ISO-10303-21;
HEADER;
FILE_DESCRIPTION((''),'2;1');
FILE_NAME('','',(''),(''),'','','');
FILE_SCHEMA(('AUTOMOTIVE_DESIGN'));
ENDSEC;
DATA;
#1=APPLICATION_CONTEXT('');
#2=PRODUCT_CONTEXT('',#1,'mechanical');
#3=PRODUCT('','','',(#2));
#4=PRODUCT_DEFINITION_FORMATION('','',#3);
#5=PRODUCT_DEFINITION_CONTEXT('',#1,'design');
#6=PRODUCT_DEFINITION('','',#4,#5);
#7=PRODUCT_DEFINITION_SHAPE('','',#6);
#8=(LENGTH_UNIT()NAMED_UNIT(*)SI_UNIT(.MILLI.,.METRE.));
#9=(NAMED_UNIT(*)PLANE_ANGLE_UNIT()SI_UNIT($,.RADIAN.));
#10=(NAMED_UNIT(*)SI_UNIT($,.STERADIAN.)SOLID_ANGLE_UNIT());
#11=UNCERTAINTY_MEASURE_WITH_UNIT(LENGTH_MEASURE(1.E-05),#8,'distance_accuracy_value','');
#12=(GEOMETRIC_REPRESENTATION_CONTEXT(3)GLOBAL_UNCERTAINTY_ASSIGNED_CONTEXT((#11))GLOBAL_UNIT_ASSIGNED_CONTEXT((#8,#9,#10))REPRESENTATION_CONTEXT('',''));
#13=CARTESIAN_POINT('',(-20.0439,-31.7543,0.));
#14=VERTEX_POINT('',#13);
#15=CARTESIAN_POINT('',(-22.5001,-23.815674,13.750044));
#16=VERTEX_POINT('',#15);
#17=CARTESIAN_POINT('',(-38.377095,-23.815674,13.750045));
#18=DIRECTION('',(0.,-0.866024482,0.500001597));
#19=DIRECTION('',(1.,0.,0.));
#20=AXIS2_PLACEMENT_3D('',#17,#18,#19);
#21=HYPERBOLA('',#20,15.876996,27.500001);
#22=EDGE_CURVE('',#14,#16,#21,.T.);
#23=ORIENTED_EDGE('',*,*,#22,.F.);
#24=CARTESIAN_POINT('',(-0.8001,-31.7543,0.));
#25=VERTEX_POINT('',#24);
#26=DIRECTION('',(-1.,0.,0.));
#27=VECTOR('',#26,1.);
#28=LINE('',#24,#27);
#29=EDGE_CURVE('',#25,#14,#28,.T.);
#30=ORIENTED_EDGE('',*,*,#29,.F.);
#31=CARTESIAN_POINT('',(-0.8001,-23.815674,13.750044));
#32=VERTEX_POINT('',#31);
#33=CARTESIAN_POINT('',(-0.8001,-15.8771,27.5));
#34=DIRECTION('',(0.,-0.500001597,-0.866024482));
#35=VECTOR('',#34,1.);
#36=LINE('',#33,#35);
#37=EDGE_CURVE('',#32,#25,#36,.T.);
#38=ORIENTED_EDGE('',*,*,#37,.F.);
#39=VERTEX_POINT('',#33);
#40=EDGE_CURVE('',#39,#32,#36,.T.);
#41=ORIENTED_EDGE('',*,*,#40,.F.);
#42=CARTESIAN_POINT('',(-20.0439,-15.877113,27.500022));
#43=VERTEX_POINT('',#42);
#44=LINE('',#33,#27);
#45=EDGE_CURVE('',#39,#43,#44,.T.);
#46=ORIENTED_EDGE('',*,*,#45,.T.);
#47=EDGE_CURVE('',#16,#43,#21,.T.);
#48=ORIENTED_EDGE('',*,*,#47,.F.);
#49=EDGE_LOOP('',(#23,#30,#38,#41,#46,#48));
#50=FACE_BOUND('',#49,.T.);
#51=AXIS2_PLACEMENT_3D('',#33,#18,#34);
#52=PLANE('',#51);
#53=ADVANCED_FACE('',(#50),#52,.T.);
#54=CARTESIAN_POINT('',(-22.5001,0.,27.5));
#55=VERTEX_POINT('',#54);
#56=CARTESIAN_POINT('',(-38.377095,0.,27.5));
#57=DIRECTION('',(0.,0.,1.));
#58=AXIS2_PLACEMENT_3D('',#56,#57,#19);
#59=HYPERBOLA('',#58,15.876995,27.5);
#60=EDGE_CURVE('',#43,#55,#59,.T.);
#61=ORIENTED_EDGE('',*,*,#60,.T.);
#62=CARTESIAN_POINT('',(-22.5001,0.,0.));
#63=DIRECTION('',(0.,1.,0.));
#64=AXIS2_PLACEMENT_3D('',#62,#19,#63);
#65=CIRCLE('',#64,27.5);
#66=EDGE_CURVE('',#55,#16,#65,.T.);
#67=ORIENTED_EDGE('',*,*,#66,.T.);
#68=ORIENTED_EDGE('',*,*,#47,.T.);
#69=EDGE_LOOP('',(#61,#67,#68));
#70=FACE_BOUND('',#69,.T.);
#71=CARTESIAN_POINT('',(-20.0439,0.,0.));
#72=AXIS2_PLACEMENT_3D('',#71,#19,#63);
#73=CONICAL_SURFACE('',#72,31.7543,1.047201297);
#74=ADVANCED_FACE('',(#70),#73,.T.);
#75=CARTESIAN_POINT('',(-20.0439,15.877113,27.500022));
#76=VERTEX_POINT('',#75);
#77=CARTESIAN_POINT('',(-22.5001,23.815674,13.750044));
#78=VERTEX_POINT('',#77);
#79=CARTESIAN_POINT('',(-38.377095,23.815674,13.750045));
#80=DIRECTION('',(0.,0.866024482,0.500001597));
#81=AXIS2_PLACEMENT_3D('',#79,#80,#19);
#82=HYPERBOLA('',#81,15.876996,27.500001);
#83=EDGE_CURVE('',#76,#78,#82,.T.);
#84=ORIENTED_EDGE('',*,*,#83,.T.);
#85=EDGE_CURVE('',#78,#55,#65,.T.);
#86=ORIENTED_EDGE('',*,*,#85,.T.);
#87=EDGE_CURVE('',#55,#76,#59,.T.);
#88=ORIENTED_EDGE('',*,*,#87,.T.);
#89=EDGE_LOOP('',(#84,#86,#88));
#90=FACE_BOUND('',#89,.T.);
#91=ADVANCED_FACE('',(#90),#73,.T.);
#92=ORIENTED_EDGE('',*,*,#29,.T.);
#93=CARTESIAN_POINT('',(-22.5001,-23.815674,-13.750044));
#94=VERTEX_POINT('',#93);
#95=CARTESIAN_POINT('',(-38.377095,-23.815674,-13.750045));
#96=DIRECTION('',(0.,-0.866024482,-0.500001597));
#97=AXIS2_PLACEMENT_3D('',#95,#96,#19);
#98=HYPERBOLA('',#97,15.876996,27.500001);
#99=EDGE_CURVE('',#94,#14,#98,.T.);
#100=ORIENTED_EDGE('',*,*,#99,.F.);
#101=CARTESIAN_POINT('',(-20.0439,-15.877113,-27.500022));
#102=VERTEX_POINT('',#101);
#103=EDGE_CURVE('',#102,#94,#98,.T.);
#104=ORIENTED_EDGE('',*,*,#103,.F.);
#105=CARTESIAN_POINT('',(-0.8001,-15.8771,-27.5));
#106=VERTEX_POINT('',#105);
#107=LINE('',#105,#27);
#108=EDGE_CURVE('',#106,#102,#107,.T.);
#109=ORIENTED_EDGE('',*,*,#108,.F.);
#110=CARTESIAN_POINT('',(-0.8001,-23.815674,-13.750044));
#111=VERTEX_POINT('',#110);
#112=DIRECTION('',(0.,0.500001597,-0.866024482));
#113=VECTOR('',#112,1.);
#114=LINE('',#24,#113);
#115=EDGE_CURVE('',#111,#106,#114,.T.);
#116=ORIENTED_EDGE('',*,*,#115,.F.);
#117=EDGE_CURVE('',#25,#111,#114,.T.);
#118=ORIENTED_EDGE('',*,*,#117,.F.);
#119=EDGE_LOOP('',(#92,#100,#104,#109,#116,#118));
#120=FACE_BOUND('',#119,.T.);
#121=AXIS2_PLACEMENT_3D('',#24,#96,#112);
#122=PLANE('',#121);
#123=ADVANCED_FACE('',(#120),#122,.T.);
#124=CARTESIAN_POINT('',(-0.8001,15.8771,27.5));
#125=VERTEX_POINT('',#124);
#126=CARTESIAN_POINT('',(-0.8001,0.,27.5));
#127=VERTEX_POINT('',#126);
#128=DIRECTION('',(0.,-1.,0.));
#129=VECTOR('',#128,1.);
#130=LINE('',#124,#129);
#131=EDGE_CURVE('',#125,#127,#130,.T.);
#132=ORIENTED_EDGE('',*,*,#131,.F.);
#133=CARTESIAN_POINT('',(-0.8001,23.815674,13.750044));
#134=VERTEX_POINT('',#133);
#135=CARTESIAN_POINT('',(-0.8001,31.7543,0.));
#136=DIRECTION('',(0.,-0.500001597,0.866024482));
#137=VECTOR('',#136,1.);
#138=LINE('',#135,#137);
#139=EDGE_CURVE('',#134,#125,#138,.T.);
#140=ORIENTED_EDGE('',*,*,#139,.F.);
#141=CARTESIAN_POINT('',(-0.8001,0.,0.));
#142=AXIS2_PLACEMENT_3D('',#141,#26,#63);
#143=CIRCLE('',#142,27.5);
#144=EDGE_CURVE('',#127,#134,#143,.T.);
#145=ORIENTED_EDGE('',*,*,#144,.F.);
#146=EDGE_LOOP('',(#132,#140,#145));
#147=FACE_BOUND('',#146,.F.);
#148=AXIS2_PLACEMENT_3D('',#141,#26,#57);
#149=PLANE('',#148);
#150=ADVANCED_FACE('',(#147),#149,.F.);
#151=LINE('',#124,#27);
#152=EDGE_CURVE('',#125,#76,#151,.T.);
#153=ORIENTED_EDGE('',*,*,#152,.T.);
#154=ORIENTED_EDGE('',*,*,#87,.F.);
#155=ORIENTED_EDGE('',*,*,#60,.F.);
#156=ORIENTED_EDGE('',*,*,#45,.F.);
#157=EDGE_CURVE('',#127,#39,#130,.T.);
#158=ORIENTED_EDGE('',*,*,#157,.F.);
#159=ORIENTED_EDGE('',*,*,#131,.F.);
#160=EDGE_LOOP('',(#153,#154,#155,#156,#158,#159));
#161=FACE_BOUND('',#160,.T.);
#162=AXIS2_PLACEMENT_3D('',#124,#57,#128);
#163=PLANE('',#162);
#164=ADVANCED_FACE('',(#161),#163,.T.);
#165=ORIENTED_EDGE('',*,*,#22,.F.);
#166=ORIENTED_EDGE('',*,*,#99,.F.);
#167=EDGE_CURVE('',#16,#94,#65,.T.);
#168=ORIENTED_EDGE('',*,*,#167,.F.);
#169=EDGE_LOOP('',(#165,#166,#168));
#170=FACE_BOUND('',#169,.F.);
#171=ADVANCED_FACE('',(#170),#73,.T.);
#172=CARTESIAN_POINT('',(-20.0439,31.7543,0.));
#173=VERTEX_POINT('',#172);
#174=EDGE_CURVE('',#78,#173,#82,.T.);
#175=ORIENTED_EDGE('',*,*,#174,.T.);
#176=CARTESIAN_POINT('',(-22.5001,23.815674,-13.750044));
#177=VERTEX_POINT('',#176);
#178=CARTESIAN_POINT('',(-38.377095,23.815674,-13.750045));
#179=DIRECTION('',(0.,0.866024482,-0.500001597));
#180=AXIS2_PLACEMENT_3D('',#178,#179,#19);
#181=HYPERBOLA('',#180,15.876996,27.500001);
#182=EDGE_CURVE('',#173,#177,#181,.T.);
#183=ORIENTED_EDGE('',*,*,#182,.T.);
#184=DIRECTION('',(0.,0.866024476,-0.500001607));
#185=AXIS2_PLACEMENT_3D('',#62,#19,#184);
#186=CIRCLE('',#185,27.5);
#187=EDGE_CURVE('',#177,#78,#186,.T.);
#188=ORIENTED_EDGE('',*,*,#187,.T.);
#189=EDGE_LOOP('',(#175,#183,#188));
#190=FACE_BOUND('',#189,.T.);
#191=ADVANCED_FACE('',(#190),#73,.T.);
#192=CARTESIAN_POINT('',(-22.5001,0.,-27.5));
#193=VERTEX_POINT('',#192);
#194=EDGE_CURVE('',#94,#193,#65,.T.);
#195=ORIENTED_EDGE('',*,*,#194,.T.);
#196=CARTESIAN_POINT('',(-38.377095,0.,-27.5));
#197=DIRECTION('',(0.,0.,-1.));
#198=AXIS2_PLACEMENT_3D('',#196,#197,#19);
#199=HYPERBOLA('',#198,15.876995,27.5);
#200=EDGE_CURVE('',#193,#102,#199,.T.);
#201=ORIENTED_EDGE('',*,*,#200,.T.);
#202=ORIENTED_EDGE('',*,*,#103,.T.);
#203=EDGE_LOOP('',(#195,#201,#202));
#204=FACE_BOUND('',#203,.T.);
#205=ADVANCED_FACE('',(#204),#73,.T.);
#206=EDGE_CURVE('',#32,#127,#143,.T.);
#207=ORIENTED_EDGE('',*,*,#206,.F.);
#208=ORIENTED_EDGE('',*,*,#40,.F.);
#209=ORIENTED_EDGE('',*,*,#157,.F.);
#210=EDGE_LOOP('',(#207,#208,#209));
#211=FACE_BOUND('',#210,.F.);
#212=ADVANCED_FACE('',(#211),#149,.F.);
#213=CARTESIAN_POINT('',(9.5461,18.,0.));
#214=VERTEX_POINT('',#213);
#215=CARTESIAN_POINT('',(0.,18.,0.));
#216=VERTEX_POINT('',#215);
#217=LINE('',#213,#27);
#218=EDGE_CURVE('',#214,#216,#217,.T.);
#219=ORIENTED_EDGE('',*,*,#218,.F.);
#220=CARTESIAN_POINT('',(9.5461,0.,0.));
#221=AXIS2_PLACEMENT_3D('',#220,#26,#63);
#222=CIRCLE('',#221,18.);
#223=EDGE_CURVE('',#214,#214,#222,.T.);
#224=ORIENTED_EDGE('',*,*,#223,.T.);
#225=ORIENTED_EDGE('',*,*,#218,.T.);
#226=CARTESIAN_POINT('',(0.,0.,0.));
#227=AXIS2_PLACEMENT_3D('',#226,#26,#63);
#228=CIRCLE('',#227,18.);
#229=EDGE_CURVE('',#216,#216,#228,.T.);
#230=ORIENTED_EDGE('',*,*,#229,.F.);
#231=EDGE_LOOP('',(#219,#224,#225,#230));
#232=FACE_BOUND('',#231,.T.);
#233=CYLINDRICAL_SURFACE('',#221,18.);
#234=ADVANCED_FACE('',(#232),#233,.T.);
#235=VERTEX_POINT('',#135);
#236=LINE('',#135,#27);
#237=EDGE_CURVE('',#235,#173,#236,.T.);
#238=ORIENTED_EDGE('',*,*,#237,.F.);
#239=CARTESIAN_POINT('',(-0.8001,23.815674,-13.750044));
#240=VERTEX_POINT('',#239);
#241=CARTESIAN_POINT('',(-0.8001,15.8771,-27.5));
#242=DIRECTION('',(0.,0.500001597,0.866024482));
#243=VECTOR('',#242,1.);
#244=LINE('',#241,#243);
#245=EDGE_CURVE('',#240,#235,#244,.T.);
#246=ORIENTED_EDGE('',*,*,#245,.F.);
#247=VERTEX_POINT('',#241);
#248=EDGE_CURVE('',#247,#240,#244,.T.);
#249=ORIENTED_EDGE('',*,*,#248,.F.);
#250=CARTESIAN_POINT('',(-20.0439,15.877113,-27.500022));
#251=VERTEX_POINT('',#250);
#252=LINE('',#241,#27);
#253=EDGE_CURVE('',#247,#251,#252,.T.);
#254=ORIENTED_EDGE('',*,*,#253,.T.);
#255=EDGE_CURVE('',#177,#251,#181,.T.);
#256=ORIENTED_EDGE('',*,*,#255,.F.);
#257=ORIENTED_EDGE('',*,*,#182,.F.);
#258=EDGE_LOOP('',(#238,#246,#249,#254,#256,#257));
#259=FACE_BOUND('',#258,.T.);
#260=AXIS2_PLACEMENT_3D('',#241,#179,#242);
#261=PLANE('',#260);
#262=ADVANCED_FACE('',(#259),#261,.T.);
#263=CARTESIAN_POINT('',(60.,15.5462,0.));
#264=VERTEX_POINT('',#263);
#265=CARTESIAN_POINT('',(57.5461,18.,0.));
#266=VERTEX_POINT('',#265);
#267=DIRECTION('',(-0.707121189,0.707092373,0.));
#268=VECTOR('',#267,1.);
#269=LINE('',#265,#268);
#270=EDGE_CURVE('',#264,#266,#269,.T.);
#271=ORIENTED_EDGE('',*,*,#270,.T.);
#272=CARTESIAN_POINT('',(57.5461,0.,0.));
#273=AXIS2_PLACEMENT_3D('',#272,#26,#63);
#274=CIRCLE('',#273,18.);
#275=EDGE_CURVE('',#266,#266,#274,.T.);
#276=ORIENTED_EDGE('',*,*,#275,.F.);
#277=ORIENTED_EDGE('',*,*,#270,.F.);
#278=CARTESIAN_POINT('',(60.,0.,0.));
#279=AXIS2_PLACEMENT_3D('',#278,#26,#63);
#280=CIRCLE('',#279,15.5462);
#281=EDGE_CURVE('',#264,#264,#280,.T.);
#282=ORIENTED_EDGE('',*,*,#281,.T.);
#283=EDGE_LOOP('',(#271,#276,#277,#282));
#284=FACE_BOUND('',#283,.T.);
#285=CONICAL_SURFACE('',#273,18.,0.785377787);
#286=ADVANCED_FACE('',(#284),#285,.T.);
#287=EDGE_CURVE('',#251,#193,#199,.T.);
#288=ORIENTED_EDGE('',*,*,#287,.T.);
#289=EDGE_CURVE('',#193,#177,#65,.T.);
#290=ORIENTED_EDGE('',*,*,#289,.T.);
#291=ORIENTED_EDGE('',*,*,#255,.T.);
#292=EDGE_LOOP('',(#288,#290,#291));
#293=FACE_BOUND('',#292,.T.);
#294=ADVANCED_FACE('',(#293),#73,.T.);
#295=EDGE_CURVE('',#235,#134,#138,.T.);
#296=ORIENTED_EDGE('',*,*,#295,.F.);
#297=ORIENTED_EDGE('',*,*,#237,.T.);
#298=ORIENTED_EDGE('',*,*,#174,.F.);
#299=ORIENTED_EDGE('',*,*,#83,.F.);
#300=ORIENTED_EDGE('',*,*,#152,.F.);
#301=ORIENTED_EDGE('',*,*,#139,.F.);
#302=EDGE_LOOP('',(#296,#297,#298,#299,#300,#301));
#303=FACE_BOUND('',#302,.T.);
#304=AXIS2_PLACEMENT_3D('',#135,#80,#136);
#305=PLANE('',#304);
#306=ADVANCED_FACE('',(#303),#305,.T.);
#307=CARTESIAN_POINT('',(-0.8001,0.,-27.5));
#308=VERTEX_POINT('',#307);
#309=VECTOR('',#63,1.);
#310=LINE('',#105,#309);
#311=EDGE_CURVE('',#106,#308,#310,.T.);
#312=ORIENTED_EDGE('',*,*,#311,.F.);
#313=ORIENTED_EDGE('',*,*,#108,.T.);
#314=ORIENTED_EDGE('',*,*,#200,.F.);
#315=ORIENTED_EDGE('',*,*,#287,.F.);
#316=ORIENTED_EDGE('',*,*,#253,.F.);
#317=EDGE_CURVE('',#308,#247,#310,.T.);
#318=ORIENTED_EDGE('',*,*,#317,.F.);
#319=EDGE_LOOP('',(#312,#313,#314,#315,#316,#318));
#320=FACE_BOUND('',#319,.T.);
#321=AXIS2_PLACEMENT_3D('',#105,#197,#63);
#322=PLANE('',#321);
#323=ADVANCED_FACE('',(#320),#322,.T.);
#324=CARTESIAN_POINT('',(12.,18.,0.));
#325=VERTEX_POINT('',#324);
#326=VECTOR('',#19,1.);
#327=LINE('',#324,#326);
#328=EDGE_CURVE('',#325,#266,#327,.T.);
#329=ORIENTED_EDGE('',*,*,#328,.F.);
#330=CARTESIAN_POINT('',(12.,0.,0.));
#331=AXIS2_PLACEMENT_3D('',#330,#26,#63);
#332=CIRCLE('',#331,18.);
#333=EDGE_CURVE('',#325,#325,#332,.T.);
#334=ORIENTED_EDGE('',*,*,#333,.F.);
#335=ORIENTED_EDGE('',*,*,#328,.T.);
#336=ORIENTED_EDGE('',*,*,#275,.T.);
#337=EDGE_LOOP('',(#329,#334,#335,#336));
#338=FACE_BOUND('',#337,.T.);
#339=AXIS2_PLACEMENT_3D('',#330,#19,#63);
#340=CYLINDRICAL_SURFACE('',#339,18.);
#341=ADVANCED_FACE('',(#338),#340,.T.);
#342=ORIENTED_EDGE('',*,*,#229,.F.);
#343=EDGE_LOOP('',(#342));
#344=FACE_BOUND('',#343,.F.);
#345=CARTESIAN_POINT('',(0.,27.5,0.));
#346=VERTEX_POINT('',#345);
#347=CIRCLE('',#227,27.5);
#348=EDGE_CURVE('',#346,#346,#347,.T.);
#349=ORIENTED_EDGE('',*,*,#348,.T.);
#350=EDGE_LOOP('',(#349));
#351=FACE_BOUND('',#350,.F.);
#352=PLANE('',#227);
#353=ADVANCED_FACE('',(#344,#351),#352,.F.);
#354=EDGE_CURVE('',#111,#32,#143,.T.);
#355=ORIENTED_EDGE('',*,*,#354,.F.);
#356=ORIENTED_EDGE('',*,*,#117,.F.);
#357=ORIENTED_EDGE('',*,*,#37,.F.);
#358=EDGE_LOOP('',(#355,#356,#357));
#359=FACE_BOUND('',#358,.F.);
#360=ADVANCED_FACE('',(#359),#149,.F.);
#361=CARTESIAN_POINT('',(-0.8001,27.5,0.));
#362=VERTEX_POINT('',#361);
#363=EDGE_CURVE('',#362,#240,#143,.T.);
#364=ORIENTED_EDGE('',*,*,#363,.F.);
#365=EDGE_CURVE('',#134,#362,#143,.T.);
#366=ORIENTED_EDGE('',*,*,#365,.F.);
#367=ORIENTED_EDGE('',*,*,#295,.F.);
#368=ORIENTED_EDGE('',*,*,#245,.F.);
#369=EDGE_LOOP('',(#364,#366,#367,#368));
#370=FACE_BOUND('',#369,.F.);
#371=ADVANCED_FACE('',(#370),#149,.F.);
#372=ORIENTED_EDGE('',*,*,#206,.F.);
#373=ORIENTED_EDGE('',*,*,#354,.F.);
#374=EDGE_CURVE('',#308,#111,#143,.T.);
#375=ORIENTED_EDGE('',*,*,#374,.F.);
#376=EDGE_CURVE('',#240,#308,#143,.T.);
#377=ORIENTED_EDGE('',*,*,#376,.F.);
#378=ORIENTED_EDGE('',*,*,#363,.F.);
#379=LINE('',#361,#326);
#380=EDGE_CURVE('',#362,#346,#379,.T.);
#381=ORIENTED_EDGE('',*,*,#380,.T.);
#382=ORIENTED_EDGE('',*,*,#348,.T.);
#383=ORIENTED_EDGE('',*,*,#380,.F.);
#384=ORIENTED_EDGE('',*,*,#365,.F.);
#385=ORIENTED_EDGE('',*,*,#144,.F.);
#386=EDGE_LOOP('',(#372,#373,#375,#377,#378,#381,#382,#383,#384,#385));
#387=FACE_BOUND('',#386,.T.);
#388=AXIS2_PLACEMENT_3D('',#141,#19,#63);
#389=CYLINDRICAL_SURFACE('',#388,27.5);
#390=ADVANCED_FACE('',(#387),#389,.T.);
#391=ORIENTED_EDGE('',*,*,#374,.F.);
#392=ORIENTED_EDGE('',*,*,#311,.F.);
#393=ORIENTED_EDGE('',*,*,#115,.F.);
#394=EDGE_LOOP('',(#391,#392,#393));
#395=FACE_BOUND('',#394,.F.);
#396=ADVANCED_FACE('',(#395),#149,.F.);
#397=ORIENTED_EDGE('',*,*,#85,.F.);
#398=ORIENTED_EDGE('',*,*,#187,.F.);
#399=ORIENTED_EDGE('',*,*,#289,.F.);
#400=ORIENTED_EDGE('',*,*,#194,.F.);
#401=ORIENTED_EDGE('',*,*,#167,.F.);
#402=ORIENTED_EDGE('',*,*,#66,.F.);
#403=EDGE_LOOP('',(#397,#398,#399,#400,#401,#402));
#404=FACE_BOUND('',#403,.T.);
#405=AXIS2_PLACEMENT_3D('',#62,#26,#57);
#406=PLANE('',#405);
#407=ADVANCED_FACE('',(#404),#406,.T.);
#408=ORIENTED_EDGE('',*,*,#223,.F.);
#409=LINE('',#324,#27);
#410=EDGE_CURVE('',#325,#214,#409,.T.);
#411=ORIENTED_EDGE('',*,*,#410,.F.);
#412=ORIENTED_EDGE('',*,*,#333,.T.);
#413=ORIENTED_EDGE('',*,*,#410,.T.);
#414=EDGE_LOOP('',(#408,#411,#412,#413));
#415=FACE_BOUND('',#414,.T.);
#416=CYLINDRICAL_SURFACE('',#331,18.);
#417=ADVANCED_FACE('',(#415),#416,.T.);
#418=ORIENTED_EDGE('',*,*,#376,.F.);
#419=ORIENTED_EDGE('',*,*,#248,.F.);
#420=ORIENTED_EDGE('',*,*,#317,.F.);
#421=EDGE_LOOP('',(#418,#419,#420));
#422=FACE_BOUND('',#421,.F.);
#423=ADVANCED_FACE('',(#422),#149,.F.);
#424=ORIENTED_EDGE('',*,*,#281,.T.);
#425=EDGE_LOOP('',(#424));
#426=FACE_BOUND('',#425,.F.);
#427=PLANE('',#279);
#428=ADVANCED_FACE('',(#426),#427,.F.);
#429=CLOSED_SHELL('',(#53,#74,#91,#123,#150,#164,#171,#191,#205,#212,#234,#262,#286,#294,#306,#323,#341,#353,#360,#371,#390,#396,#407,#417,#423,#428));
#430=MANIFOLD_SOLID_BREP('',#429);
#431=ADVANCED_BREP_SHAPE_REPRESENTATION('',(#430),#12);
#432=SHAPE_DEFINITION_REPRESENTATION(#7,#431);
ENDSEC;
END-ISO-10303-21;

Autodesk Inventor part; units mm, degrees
ref_plane "YZ Plane" through (0, 0, 0) normal (1, 0, 0) x (0, 1, 0)
ref_plane "XZ Plane" through (0, 0, 0) normal (0, 1, 0) x (-1, 0, 0)
sketch "Szkic1" plane through (0, 0, 0) normal (0, 0, 1) x (1, 0, 0)
  line L0 (0, 27.5) -> (0, 18)
  line L1 (12, 18) -> (60, 18)
  line L2 (60, 18) -> (60, 0)
  line L3 (60, 0) -> (-0.8001, 0)
  line L4 (-12.9601, 0) -> (72.16, 0) projected
  line L5 (-0.8001, 0) -> (-0.8001, 27.5)
  line L6 (-0.8001, 27.5) -> (0, 27.5)
  line L7 (12, 18) -> (9.5461, 18)
  line L8 (9.5461, 18) -> (0, 18)
  line L9 (0, -5.5) -> (0, 33) projected
  dimension "d0" = 60
  dimension "d1" = 48
  dimension "d2" = 36
  dimension "d9" = 0.8001
  dimension "d10" = 55
  dimension "d13" = 2.4539
  dimension "d14" = 36
revolve "Bryła" add sketch "Szkic1" angle 360 about axis through (60, 0, 0) along (-1, 0, 0)
sketch "Szkic2" plane through (-0.8001, 0, 0) normal (-1, 0, 0) x (0, 0, 1)
  line L0 (0, 31.7543) -> (27.5, 15.8771)
  line L1 (27.5, 15.8771) -> (27.5, -15.8771)
  line L2 (27.5, -15.8771) -> (0, -31.7543)
  line L3 (0, -31.7543) -> (-27.5, -15.8771)
  line L4 (-27.5, -15.8771) -> (-27.5, 15.8771)
  line L5 (-27.5, 15.8771) -> (0, 31.7543)
  point P0 (0, 0)
  point P1 (0, 0)
  dimension "d11" = 55
extrude "Głowica" add sketch "Szkic2" along normal blind 21.7
sketch "Szkic4" plane through (0, 0, 0) normal (0, 0, 1) x (1, 0, 0)
  line L0 (-22.5001, 27.5) -> (-22.5001, 31.7543)
  line L1 (-22.5001, 31.7543) -> (-20.0439, 31.7543)
  line L2 (-20.0439, 31.7543) -> (-22.5001, 27.5)
  line L3 (-26.8401, 0) -> (3.5399, 0) projected
  line L4 (-0.8001, 31.7543) -> (-22.5001, 31.7543) projected
  line L5 (-22.5001, 15.8771) -> (-22.5001, 31.7543) projected
  dimension "d5" = 30
  dimension "d19" = 55
revolve "Faza1" cut sketch "Szkic4" angle 360 about axis through (-10, 0, 0) along (1, 0, 0)
thread "Gwint" size "M36x4" class "6g" standard "ISO Metric profile" length 48
chamfer "Faza2" distance 2.4538 distance2 2.4539 1 edges at (60, -18, 0) measured on face at (60, -5.3127, 7.0875)
ref_plane "Work Plane1" through (1.525, 0, 0) normal (0, 0, 1) x (1, 0, 0)
equation "\"d11\" = SW"
equation "\"d3\" = KOH - SD"
equation "\"d15\" = GEL"
equation "\"d6\" = -0.5 * SPD + 0.5 * GD"
equation "\"d0\" = NLG"
equation "\"d1\" = GEL"
equation "\"d2\" = GD"
equation "\"d10\" = SD2"
equation "\"d14\" = BDM"
equation "\"d5\" = ANG1"
equation "\"d19\" = SW0"
equation "\"NLG\" = 60"
equation "\"GD\" = NND"
equation "\"BDM\" = NND"
equation "\"KOH\" = 22.5"
equation "\"GEL\" = 48"
equation "\"SW\" = 55"
equation "\"SW0\" = SW"
equation "\"SPD\" = NND - 1.2269 * PTC"
equation "\"SD2\" = SW"
equation "\"SD\" = 0.8"
equation "\"ANG1\" = 30deg"
equation "\"GAL\" = 0.61345 * PTC"
equation "\"GUL\" = 0.61345 * PTC"
equation "\"RR\" = 1"
equation "\"WFT\" = SD"
equation "\"GD1\" = THREADDIA - 1.2269 * PTC"
equation "\"THREADDIA\" = 36"
equation "\"SDH\" = SW"
equation "\"TOA\" = 30deg"
equation "\"FAWI\" = 45deg"
equation "\"PTC\" = 4"
equation "\"NND\" = 36"
equation "\"E0\" = 1.155 * SW"
properties part number "AS 1110 - M36 x 60" material "Stal, miękka"
